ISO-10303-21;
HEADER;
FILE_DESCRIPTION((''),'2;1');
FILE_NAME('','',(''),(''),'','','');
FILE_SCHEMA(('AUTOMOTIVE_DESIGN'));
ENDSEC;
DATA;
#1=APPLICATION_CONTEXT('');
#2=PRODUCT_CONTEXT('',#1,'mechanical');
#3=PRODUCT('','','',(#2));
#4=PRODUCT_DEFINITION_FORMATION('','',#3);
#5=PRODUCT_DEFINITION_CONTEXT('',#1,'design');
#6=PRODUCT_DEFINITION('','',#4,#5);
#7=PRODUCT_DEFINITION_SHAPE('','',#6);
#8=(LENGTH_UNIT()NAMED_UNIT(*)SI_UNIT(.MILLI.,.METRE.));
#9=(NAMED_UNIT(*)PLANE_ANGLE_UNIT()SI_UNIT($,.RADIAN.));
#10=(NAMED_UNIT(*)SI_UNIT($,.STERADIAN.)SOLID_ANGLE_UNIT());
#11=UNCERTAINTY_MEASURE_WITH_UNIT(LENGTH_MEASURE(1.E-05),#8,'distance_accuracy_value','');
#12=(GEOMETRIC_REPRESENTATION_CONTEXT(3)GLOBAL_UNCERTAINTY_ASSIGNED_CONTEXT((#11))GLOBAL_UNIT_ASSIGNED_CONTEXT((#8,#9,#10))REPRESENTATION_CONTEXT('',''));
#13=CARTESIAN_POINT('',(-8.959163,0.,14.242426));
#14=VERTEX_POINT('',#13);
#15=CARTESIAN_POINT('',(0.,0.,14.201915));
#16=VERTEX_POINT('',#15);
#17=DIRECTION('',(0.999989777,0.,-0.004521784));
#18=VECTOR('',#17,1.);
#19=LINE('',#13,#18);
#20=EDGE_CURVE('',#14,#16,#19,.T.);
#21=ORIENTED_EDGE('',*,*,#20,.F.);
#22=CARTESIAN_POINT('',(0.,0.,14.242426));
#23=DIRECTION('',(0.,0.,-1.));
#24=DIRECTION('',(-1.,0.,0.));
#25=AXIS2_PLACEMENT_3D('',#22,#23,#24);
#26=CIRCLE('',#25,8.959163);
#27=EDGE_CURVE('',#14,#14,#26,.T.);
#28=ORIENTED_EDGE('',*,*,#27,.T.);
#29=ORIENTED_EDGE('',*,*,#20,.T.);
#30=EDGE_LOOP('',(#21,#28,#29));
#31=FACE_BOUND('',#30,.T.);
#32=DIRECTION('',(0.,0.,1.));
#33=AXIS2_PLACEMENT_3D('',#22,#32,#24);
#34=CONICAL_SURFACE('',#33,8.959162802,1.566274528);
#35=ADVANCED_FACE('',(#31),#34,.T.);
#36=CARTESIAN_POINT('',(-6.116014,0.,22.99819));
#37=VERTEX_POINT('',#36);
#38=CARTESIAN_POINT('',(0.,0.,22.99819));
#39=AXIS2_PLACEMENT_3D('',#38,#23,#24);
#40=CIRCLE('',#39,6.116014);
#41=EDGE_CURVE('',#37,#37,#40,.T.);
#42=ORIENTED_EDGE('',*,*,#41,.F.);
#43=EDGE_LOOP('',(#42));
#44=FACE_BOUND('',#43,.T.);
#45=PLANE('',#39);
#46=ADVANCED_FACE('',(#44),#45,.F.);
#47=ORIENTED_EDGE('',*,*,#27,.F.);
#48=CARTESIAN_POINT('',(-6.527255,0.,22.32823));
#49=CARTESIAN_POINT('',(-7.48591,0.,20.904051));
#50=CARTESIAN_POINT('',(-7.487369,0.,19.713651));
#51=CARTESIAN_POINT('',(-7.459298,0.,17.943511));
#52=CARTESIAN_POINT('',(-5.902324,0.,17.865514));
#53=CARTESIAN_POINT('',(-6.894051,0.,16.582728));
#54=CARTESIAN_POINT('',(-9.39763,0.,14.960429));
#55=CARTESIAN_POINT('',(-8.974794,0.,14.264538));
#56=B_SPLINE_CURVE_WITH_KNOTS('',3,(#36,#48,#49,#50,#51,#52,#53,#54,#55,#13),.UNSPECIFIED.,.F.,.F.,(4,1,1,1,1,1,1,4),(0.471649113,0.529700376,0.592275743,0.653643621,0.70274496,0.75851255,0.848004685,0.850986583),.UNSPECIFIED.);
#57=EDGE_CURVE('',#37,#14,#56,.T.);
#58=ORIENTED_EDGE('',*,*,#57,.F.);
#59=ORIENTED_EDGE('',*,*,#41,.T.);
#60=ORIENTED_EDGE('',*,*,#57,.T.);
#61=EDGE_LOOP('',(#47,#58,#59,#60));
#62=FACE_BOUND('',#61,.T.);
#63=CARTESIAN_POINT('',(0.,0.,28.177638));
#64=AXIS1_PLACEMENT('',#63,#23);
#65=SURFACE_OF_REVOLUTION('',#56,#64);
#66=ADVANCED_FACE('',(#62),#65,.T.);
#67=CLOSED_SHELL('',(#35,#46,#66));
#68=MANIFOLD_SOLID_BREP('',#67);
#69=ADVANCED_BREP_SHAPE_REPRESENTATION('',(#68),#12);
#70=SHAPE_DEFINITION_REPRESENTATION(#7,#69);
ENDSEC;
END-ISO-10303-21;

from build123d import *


with BuildPart() as f2:
    # F0 (on Front) → F2 (revolve)
    with BuildSketch(Plane.XZ):
        with BuildLine():
            Line((0, 22.9981895605), (-6.1160139578, 22.9981895605))
            add(Edge.make_bspline(
                [(-6.1160139578, 22.9981895605), (-6.5272548109, 22.3282296666), (-7.4859096846, 20.904050977), (-7.4873686315, 19.7136508406), (-7.4592975783, 17.9435108088), (-5.9023238156, 17.8655136182), (-6.89405113, 16.5827279586), (-9.3976303075, 14.9604288728), (-8.9747941843, 14.2645384553), (-8.9591628024, 14.24242636)],
                knots=[0.4716491127, 0.4716491127, 0.4716491127, 0.4716491127, 0.529700376, 0.5922757431, 0.6536436214, 0.7027449596, 0.7585125505, 0.8480046848, 0.8509865829, 0.8509865829, 0.8509865829, 0.8509865829], degree=3))
            Line((-8.9591628024, 14.24242636), (0, 14.2019145489))
            Line((0, 14.2019145489), (0, 22.9981895605))
        make_face()
    revolve(axis=Axis((0, 0, 28.1776376069), (0, 0, -1)))


solid = f2.part
